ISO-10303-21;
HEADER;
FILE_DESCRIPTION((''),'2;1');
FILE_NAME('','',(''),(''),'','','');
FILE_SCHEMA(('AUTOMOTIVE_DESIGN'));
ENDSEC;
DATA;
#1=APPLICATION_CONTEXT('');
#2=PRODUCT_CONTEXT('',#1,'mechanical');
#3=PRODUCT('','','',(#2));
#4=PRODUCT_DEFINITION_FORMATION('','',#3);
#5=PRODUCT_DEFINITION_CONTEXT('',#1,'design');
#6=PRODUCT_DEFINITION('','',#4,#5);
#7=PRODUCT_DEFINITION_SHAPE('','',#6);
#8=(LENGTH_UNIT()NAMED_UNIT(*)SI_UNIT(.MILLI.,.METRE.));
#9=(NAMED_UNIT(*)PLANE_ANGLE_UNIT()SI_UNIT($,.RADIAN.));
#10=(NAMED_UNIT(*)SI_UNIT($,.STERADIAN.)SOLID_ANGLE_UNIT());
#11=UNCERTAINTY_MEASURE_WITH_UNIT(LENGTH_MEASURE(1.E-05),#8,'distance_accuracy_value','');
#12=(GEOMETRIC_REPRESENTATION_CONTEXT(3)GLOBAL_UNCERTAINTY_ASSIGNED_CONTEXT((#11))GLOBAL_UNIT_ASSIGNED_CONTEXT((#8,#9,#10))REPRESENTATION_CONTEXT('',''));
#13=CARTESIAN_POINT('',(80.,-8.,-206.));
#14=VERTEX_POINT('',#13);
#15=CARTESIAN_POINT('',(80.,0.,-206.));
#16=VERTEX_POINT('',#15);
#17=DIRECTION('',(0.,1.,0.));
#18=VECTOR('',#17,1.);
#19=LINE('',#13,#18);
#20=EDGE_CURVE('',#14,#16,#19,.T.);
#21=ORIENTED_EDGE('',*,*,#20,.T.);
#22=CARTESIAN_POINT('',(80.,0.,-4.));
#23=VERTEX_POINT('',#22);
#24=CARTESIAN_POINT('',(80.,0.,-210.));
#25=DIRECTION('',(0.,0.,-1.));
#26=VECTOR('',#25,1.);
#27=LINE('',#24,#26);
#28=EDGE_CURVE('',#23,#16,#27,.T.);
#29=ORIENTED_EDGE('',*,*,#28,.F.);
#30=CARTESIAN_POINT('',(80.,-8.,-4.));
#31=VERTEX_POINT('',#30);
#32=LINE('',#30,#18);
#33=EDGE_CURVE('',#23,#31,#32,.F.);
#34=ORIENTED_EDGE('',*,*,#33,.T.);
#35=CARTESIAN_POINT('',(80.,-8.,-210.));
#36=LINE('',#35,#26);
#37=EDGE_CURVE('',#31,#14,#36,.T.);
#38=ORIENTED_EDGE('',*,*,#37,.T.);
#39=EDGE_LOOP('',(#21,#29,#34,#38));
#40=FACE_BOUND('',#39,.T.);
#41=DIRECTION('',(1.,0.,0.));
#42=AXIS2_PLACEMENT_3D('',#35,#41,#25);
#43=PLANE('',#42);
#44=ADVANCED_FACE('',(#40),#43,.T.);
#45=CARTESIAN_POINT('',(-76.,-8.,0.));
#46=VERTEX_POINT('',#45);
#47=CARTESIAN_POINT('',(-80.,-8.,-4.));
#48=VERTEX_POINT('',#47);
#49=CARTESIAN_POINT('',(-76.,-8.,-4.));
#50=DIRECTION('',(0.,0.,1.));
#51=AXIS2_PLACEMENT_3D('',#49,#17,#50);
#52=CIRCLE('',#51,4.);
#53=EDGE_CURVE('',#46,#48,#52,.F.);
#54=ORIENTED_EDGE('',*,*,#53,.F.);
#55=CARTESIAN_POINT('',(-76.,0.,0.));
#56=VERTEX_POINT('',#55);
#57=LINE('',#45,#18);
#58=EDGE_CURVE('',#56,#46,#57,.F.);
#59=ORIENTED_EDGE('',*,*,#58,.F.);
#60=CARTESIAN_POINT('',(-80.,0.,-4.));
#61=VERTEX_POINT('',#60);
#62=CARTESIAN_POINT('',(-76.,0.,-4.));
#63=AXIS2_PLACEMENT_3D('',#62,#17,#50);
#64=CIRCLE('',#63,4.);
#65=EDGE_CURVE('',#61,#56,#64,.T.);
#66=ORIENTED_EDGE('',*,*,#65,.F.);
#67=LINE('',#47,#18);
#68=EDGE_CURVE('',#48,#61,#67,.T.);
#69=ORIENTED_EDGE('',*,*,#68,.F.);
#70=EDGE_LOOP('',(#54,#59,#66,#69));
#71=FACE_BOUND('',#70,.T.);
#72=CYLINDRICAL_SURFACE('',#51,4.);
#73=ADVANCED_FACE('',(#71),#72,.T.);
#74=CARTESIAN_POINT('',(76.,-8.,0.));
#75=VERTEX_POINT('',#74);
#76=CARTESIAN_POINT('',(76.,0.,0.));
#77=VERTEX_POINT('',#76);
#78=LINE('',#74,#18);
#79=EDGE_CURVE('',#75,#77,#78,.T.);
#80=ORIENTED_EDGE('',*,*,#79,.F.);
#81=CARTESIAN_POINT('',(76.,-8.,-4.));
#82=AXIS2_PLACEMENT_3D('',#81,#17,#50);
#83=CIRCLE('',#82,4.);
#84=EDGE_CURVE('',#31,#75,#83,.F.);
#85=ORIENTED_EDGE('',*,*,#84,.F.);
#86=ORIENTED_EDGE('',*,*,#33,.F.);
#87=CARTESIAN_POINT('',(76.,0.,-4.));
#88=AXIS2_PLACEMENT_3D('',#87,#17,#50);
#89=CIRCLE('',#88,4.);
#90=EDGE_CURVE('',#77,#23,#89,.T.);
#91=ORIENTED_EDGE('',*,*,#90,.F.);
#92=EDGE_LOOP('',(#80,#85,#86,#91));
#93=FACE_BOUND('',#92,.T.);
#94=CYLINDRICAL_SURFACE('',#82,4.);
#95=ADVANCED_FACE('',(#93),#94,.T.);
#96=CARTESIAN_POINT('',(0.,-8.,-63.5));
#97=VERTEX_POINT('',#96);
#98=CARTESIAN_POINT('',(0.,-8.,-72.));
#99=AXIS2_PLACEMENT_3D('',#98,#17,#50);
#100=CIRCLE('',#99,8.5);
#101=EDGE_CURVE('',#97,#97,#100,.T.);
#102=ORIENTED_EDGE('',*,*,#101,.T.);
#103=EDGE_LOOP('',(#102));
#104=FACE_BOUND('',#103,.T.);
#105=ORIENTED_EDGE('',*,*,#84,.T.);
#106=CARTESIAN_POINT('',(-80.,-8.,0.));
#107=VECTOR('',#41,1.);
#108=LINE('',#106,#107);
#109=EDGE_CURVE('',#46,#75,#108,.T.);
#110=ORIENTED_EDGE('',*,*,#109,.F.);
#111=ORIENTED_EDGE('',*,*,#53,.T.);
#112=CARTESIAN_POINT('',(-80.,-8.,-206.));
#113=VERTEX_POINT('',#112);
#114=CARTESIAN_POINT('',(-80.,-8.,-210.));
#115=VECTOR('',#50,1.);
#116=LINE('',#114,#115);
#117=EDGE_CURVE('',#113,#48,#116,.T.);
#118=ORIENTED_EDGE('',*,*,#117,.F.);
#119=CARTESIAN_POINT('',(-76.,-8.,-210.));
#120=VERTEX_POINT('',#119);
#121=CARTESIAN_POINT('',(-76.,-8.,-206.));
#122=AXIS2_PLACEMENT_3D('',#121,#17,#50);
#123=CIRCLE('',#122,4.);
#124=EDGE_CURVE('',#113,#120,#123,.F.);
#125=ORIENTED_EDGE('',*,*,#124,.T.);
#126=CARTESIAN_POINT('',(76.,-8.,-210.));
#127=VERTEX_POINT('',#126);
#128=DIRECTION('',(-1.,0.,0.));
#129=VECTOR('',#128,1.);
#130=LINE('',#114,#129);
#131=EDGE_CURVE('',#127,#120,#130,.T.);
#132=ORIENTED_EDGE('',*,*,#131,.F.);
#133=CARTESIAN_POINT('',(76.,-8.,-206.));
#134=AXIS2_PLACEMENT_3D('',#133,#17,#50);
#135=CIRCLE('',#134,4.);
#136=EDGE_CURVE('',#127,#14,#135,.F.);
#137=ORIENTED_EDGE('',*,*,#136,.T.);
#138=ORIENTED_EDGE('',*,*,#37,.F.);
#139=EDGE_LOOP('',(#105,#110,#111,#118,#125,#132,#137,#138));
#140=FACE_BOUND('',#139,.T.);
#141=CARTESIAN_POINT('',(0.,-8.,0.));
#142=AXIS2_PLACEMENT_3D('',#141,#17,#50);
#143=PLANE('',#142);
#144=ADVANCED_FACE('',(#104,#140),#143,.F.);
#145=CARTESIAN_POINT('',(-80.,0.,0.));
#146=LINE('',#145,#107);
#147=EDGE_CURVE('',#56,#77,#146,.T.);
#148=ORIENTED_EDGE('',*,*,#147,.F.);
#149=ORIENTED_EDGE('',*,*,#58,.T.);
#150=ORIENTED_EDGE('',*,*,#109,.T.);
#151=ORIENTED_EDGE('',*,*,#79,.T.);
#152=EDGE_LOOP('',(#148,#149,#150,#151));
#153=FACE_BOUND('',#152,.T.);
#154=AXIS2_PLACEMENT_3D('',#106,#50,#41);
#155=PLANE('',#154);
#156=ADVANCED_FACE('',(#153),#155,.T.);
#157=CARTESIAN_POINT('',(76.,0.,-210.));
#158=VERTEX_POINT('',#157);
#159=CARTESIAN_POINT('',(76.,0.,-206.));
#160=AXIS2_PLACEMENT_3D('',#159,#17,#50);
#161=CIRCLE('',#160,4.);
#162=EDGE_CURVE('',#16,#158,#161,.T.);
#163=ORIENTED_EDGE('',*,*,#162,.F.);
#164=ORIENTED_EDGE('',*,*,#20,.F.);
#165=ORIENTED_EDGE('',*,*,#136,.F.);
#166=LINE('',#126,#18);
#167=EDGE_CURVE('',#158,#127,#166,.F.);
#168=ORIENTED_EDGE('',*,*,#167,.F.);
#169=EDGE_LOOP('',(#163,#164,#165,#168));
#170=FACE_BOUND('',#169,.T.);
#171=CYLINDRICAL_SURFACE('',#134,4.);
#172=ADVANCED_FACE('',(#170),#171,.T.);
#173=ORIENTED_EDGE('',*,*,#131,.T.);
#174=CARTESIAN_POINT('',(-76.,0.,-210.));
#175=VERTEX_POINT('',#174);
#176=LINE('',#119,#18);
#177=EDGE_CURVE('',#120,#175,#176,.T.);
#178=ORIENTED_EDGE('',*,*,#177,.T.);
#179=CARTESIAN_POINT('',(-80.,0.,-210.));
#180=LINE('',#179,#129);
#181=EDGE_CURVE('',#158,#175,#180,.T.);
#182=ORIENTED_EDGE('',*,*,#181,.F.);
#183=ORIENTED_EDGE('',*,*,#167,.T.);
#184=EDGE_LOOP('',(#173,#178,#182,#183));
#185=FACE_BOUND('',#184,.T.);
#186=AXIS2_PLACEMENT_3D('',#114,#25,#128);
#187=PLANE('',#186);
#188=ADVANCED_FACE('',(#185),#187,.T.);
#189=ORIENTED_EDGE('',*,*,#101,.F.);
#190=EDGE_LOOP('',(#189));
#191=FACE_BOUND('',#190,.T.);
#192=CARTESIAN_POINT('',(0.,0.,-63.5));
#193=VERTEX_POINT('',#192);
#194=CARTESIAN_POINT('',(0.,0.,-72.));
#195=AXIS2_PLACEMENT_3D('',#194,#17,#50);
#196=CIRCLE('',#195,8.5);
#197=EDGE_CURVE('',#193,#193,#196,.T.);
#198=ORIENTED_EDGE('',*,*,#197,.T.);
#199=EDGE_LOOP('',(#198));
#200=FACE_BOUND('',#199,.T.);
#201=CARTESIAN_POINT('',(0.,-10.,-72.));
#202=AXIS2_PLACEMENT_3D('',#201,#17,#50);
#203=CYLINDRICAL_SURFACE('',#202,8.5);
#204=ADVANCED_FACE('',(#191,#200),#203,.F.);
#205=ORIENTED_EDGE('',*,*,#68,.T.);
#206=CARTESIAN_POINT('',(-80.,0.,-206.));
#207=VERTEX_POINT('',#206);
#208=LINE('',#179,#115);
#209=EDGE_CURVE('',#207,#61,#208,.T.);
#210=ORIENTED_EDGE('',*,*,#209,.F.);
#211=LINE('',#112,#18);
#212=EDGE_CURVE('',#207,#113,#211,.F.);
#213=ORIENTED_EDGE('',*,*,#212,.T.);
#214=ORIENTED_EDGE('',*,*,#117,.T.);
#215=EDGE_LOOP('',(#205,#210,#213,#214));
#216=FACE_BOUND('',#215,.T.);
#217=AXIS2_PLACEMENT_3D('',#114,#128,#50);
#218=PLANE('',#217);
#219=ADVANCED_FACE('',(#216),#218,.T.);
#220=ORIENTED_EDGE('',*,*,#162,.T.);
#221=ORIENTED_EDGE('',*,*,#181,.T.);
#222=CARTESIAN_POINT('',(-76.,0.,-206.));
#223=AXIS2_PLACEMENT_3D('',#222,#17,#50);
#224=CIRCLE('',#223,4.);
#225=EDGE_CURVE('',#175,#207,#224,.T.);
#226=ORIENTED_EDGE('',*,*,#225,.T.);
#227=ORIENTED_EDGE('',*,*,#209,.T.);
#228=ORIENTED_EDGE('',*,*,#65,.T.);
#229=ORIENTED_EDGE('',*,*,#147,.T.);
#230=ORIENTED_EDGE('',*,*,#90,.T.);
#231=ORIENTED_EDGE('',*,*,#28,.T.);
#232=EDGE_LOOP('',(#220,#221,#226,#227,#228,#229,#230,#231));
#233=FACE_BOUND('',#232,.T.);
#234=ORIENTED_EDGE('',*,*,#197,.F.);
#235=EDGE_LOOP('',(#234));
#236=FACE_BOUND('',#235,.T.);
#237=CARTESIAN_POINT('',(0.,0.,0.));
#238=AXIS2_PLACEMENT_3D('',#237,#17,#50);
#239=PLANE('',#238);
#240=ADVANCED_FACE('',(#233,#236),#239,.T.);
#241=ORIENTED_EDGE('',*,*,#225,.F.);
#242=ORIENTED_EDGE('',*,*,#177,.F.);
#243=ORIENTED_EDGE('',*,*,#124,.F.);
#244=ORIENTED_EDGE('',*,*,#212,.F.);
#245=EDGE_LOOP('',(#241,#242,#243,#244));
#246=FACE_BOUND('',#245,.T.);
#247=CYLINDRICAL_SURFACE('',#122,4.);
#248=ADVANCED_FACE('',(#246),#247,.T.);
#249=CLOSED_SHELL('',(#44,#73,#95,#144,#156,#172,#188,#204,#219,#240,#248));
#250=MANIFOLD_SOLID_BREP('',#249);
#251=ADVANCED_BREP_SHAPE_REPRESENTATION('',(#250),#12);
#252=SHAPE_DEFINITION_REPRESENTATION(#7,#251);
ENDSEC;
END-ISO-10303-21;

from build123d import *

# Parameters (mm, degrees)
IZIM1_W               = 160
IZIM1_H               = 210
TABAN_FLAN_1_DEPTH    = 8
K_ELERI_START         = -8
K_ELERI_K_R1_DEPTH    = 8
IZIM6_R               = 8.5
KES_EKSTR_ZYON1_DEPTH = 10


# Read off the part's stored shape, not the designer's step: Köşeleri kır1
# Sheet-metal steps are written as plain solids
with BuildPart() as part:
    # Çizim1 → Taban-Flanş1 (new body)
    with BuildSketch(Plane(origin=(0, 0, 0), x_dir=(1, 0, 0), z_dir=(0, 1, 0))):
        with Locations((0, 105)):
            Rectangle(IZIM1_W, IZIM1_H)
    extrude(amount=-TABAN_FLAN_1_DEPTH)

    # Köşeleri kır1 outline → Köşeleri kır1 (cut)
    with BuildSketch(Plane(origin=(0, 0, 0), x_dir=(1, 0, 0), z_dir=(0, 1, 0)).offset(K_ELERI_START)):
        with BuildLine():
            ThreePointArc((-80, 206), (-78.828427125, 208.828427125), (-76, 210))
            Line((-76, 210), (-80, 210))
            Line((-80, 210), (-80, 206))
        make_face()
        with BuildLine():
            Line((80, 210), (76, 210))
            ThreePointArc((76, 210), (78.828427125, 208.828427125), (80, 206))
            Line((80, 206), (80, 210))
        make_face()
        with BuildLine():
            ThreePointArc((-76, 0), (-78.828427125, 1.171572875), (-80, 4))
            Line((-80, 4), (-80, 0))
            Line((-80, 0), (-76, 0))
        make_face()
        with BuildLine():
            Line((80, 0), (80, 4))
            ThreePointArc((80, 4), (78.828427125, 1.171572875), (76, 0))
            Line((76, 0), (80, 0))
        make_face()
    extrude(amount=K_ELERI_K_R1_DEPTH, mode=Mode.SUBTRACT)

    # Çizim6 → Kes-Ekstrüzyon1 (cut)
    with BuildSketch(Plane(origin=(0, 0, 0), x_dir=(1, 0, 0), z_dir=(0, 1, 0))):
        with Locations(Location((0, 72, 0), (0, 0, 270))):
            Circle(IZIM6_R)
    extrude(amount=-KES_EKSTR_ZYON1_DEPTH, mode=Mode.SUBTRACT)


solid = part.part
